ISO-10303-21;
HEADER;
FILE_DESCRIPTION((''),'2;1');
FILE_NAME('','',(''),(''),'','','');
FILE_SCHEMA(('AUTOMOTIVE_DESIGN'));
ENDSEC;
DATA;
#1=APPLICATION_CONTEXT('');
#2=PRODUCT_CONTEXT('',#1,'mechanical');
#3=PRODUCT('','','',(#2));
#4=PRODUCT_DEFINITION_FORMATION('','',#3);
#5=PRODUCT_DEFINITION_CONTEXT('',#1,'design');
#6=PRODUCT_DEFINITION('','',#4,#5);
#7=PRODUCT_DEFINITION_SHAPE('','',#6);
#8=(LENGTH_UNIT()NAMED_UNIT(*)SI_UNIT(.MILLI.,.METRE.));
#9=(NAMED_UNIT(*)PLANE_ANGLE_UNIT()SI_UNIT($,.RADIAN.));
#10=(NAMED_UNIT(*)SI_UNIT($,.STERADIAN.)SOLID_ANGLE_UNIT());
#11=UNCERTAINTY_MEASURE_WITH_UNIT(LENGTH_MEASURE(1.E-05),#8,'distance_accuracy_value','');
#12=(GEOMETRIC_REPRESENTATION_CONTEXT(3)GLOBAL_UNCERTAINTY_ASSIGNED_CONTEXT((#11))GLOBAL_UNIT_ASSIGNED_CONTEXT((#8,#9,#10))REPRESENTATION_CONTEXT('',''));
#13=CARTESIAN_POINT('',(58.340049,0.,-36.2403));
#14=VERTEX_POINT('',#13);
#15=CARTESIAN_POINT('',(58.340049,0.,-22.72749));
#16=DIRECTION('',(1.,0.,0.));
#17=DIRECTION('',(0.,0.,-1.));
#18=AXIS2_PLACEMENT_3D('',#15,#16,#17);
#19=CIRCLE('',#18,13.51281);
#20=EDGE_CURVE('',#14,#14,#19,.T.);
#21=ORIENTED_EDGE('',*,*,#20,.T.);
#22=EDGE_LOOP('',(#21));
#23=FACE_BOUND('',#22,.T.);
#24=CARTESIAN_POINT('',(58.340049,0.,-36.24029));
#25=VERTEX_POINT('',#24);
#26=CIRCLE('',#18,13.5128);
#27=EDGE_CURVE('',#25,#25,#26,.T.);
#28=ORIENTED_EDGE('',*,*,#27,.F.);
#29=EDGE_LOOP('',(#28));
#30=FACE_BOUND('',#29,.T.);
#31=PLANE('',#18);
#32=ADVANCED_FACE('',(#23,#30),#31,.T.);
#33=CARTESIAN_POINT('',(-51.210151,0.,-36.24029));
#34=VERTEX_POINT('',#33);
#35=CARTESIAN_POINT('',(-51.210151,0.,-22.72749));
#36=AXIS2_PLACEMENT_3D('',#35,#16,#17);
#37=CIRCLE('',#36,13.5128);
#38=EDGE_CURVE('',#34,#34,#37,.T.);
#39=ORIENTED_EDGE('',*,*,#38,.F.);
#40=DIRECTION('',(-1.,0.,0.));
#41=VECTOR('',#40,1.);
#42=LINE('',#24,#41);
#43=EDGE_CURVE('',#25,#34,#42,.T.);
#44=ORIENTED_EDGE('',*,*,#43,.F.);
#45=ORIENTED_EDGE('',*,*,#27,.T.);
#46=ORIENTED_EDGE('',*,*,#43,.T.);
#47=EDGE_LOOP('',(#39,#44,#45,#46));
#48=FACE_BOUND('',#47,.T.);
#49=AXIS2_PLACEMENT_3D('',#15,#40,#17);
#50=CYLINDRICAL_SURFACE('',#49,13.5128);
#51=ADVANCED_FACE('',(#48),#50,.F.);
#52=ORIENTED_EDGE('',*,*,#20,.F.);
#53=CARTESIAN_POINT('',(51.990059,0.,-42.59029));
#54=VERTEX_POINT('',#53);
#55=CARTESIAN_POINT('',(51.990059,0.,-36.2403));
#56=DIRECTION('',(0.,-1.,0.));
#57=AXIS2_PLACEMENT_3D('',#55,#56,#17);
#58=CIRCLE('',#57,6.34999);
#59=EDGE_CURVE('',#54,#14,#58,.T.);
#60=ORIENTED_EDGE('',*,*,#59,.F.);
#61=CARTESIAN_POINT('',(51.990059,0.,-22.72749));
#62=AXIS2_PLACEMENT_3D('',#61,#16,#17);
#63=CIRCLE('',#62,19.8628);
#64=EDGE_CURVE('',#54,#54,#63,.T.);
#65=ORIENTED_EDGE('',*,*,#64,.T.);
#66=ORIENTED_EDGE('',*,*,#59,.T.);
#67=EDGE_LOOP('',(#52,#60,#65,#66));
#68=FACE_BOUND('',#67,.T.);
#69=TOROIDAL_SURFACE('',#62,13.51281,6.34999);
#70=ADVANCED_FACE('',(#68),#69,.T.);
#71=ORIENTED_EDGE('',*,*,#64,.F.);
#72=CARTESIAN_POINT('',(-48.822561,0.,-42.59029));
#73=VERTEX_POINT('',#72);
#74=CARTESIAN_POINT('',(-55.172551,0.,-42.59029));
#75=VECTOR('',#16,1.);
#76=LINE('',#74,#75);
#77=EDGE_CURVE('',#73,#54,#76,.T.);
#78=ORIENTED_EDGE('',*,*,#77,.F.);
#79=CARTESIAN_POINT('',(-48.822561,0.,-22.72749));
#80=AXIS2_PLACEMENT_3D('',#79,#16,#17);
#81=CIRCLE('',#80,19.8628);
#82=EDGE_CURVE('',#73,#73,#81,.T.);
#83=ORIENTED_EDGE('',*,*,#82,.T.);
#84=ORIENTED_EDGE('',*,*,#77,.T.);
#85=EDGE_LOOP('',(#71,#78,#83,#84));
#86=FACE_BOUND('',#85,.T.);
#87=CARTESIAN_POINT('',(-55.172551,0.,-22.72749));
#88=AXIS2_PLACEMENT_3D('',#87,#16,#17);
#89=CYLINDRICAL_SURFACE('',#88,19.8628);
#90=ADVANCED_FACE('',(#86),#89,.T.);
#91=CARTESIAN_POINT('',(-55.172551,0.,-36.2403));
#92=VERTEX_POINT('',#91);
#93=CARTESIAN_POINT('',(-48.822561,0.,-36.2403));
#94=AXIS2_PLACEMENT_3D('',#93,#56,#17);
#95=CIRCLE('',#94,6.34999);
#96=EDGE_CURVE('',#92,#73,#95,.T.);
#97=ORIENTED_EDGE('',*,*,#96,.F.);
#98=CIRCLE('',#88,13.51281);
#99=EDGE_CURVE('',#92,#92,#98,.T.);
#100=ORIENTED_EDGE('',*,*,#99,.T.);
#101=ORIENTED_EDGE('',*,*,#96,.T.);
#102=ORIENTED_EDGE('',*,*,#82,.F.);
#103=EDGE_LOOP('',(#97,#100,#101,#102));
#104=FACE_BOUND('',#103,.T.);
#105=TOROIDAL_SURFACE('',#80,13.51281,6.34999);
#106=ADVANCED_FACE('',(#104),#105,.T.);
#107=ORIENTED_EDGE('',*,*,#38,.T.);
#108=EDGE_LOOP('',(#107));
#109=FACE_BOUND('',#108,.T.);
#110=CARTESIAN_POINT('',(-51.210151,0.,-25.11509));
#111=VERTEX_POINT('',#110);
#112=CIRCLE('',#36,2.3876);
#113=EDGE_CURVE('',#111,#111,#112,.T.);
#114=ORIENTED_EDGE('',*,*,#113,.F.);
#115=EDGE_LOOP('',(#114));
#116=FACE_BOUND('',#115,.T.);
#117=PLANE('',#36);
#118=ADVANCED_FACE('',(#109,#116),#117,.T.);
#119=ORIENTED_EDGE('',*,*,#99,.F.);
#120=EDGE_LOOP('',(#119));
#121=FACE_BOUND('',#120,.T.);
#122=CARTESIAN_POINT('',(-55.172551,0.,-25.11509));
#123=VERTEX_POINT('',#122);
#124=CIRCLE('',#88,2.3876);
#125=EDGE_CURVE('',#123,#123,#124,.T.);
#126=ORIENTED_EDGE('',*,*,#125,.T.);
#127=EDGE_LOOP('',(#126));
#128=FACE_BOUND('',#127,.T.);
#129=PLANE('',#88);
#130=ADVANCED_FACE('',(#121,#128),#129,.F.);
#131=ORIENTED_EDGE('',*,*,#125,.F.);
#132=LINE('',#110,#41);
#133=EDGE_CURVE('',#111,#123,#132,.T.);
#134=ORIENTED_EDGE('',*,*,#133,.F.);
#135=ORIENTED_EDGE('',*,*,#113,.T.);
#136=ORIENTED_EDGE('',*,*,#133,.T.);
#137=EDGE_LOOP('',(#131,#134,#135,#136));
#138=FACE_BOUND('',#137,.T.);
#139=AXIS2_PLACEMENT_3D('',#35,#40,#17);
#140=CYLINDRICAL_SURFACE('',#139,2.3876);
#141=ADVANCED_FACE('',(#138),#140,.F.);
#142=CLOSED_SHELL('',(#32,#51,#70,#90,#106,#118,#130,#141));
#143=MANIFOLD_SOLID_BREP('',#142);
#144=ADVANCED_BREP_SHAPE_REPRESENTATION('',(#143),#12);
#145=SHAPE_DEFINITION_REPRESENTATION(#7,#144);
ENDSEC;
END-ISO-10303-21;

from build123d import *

# Parameters (mm, degrees)
F2_R = 6.34999


# Not quite as in the source:
# - a fillet or chamfer is up to 0.001 mm smaller than in the source, because OpenCascade refuses the exact size


with BuildPart() as f1:
    # F0 (on Front) → F1 (revolve)
    with BuildSketch(Plane.XZ):
        Polygon((-51.2101510014, -25.1150900284), (-55.1725510014, -25.1150900284), (-55.1725510014, -42.5902900284), (58.3400489986, -42.5902900284), (58.3400489986, -36.2402900284), (-51.2101510014, -36.2402900284), align=None)
    revolve(axis=Axis((-5.4417531937, 0, -22.7274900284), (1, 0, 0)))

    # F2 (radius 6.35 in the source; OpenCascade refuses exactly that, so slightly less here)
    f2_edges = [f1.edges().sort_by_distance(p)[0] for p in [
        (-55.172551, 0, -2.86469),
        (58.340049, 0, -2.86469),
    ]]
    fillet(f2_edges, radius=F2_R)


solid = f1.part
